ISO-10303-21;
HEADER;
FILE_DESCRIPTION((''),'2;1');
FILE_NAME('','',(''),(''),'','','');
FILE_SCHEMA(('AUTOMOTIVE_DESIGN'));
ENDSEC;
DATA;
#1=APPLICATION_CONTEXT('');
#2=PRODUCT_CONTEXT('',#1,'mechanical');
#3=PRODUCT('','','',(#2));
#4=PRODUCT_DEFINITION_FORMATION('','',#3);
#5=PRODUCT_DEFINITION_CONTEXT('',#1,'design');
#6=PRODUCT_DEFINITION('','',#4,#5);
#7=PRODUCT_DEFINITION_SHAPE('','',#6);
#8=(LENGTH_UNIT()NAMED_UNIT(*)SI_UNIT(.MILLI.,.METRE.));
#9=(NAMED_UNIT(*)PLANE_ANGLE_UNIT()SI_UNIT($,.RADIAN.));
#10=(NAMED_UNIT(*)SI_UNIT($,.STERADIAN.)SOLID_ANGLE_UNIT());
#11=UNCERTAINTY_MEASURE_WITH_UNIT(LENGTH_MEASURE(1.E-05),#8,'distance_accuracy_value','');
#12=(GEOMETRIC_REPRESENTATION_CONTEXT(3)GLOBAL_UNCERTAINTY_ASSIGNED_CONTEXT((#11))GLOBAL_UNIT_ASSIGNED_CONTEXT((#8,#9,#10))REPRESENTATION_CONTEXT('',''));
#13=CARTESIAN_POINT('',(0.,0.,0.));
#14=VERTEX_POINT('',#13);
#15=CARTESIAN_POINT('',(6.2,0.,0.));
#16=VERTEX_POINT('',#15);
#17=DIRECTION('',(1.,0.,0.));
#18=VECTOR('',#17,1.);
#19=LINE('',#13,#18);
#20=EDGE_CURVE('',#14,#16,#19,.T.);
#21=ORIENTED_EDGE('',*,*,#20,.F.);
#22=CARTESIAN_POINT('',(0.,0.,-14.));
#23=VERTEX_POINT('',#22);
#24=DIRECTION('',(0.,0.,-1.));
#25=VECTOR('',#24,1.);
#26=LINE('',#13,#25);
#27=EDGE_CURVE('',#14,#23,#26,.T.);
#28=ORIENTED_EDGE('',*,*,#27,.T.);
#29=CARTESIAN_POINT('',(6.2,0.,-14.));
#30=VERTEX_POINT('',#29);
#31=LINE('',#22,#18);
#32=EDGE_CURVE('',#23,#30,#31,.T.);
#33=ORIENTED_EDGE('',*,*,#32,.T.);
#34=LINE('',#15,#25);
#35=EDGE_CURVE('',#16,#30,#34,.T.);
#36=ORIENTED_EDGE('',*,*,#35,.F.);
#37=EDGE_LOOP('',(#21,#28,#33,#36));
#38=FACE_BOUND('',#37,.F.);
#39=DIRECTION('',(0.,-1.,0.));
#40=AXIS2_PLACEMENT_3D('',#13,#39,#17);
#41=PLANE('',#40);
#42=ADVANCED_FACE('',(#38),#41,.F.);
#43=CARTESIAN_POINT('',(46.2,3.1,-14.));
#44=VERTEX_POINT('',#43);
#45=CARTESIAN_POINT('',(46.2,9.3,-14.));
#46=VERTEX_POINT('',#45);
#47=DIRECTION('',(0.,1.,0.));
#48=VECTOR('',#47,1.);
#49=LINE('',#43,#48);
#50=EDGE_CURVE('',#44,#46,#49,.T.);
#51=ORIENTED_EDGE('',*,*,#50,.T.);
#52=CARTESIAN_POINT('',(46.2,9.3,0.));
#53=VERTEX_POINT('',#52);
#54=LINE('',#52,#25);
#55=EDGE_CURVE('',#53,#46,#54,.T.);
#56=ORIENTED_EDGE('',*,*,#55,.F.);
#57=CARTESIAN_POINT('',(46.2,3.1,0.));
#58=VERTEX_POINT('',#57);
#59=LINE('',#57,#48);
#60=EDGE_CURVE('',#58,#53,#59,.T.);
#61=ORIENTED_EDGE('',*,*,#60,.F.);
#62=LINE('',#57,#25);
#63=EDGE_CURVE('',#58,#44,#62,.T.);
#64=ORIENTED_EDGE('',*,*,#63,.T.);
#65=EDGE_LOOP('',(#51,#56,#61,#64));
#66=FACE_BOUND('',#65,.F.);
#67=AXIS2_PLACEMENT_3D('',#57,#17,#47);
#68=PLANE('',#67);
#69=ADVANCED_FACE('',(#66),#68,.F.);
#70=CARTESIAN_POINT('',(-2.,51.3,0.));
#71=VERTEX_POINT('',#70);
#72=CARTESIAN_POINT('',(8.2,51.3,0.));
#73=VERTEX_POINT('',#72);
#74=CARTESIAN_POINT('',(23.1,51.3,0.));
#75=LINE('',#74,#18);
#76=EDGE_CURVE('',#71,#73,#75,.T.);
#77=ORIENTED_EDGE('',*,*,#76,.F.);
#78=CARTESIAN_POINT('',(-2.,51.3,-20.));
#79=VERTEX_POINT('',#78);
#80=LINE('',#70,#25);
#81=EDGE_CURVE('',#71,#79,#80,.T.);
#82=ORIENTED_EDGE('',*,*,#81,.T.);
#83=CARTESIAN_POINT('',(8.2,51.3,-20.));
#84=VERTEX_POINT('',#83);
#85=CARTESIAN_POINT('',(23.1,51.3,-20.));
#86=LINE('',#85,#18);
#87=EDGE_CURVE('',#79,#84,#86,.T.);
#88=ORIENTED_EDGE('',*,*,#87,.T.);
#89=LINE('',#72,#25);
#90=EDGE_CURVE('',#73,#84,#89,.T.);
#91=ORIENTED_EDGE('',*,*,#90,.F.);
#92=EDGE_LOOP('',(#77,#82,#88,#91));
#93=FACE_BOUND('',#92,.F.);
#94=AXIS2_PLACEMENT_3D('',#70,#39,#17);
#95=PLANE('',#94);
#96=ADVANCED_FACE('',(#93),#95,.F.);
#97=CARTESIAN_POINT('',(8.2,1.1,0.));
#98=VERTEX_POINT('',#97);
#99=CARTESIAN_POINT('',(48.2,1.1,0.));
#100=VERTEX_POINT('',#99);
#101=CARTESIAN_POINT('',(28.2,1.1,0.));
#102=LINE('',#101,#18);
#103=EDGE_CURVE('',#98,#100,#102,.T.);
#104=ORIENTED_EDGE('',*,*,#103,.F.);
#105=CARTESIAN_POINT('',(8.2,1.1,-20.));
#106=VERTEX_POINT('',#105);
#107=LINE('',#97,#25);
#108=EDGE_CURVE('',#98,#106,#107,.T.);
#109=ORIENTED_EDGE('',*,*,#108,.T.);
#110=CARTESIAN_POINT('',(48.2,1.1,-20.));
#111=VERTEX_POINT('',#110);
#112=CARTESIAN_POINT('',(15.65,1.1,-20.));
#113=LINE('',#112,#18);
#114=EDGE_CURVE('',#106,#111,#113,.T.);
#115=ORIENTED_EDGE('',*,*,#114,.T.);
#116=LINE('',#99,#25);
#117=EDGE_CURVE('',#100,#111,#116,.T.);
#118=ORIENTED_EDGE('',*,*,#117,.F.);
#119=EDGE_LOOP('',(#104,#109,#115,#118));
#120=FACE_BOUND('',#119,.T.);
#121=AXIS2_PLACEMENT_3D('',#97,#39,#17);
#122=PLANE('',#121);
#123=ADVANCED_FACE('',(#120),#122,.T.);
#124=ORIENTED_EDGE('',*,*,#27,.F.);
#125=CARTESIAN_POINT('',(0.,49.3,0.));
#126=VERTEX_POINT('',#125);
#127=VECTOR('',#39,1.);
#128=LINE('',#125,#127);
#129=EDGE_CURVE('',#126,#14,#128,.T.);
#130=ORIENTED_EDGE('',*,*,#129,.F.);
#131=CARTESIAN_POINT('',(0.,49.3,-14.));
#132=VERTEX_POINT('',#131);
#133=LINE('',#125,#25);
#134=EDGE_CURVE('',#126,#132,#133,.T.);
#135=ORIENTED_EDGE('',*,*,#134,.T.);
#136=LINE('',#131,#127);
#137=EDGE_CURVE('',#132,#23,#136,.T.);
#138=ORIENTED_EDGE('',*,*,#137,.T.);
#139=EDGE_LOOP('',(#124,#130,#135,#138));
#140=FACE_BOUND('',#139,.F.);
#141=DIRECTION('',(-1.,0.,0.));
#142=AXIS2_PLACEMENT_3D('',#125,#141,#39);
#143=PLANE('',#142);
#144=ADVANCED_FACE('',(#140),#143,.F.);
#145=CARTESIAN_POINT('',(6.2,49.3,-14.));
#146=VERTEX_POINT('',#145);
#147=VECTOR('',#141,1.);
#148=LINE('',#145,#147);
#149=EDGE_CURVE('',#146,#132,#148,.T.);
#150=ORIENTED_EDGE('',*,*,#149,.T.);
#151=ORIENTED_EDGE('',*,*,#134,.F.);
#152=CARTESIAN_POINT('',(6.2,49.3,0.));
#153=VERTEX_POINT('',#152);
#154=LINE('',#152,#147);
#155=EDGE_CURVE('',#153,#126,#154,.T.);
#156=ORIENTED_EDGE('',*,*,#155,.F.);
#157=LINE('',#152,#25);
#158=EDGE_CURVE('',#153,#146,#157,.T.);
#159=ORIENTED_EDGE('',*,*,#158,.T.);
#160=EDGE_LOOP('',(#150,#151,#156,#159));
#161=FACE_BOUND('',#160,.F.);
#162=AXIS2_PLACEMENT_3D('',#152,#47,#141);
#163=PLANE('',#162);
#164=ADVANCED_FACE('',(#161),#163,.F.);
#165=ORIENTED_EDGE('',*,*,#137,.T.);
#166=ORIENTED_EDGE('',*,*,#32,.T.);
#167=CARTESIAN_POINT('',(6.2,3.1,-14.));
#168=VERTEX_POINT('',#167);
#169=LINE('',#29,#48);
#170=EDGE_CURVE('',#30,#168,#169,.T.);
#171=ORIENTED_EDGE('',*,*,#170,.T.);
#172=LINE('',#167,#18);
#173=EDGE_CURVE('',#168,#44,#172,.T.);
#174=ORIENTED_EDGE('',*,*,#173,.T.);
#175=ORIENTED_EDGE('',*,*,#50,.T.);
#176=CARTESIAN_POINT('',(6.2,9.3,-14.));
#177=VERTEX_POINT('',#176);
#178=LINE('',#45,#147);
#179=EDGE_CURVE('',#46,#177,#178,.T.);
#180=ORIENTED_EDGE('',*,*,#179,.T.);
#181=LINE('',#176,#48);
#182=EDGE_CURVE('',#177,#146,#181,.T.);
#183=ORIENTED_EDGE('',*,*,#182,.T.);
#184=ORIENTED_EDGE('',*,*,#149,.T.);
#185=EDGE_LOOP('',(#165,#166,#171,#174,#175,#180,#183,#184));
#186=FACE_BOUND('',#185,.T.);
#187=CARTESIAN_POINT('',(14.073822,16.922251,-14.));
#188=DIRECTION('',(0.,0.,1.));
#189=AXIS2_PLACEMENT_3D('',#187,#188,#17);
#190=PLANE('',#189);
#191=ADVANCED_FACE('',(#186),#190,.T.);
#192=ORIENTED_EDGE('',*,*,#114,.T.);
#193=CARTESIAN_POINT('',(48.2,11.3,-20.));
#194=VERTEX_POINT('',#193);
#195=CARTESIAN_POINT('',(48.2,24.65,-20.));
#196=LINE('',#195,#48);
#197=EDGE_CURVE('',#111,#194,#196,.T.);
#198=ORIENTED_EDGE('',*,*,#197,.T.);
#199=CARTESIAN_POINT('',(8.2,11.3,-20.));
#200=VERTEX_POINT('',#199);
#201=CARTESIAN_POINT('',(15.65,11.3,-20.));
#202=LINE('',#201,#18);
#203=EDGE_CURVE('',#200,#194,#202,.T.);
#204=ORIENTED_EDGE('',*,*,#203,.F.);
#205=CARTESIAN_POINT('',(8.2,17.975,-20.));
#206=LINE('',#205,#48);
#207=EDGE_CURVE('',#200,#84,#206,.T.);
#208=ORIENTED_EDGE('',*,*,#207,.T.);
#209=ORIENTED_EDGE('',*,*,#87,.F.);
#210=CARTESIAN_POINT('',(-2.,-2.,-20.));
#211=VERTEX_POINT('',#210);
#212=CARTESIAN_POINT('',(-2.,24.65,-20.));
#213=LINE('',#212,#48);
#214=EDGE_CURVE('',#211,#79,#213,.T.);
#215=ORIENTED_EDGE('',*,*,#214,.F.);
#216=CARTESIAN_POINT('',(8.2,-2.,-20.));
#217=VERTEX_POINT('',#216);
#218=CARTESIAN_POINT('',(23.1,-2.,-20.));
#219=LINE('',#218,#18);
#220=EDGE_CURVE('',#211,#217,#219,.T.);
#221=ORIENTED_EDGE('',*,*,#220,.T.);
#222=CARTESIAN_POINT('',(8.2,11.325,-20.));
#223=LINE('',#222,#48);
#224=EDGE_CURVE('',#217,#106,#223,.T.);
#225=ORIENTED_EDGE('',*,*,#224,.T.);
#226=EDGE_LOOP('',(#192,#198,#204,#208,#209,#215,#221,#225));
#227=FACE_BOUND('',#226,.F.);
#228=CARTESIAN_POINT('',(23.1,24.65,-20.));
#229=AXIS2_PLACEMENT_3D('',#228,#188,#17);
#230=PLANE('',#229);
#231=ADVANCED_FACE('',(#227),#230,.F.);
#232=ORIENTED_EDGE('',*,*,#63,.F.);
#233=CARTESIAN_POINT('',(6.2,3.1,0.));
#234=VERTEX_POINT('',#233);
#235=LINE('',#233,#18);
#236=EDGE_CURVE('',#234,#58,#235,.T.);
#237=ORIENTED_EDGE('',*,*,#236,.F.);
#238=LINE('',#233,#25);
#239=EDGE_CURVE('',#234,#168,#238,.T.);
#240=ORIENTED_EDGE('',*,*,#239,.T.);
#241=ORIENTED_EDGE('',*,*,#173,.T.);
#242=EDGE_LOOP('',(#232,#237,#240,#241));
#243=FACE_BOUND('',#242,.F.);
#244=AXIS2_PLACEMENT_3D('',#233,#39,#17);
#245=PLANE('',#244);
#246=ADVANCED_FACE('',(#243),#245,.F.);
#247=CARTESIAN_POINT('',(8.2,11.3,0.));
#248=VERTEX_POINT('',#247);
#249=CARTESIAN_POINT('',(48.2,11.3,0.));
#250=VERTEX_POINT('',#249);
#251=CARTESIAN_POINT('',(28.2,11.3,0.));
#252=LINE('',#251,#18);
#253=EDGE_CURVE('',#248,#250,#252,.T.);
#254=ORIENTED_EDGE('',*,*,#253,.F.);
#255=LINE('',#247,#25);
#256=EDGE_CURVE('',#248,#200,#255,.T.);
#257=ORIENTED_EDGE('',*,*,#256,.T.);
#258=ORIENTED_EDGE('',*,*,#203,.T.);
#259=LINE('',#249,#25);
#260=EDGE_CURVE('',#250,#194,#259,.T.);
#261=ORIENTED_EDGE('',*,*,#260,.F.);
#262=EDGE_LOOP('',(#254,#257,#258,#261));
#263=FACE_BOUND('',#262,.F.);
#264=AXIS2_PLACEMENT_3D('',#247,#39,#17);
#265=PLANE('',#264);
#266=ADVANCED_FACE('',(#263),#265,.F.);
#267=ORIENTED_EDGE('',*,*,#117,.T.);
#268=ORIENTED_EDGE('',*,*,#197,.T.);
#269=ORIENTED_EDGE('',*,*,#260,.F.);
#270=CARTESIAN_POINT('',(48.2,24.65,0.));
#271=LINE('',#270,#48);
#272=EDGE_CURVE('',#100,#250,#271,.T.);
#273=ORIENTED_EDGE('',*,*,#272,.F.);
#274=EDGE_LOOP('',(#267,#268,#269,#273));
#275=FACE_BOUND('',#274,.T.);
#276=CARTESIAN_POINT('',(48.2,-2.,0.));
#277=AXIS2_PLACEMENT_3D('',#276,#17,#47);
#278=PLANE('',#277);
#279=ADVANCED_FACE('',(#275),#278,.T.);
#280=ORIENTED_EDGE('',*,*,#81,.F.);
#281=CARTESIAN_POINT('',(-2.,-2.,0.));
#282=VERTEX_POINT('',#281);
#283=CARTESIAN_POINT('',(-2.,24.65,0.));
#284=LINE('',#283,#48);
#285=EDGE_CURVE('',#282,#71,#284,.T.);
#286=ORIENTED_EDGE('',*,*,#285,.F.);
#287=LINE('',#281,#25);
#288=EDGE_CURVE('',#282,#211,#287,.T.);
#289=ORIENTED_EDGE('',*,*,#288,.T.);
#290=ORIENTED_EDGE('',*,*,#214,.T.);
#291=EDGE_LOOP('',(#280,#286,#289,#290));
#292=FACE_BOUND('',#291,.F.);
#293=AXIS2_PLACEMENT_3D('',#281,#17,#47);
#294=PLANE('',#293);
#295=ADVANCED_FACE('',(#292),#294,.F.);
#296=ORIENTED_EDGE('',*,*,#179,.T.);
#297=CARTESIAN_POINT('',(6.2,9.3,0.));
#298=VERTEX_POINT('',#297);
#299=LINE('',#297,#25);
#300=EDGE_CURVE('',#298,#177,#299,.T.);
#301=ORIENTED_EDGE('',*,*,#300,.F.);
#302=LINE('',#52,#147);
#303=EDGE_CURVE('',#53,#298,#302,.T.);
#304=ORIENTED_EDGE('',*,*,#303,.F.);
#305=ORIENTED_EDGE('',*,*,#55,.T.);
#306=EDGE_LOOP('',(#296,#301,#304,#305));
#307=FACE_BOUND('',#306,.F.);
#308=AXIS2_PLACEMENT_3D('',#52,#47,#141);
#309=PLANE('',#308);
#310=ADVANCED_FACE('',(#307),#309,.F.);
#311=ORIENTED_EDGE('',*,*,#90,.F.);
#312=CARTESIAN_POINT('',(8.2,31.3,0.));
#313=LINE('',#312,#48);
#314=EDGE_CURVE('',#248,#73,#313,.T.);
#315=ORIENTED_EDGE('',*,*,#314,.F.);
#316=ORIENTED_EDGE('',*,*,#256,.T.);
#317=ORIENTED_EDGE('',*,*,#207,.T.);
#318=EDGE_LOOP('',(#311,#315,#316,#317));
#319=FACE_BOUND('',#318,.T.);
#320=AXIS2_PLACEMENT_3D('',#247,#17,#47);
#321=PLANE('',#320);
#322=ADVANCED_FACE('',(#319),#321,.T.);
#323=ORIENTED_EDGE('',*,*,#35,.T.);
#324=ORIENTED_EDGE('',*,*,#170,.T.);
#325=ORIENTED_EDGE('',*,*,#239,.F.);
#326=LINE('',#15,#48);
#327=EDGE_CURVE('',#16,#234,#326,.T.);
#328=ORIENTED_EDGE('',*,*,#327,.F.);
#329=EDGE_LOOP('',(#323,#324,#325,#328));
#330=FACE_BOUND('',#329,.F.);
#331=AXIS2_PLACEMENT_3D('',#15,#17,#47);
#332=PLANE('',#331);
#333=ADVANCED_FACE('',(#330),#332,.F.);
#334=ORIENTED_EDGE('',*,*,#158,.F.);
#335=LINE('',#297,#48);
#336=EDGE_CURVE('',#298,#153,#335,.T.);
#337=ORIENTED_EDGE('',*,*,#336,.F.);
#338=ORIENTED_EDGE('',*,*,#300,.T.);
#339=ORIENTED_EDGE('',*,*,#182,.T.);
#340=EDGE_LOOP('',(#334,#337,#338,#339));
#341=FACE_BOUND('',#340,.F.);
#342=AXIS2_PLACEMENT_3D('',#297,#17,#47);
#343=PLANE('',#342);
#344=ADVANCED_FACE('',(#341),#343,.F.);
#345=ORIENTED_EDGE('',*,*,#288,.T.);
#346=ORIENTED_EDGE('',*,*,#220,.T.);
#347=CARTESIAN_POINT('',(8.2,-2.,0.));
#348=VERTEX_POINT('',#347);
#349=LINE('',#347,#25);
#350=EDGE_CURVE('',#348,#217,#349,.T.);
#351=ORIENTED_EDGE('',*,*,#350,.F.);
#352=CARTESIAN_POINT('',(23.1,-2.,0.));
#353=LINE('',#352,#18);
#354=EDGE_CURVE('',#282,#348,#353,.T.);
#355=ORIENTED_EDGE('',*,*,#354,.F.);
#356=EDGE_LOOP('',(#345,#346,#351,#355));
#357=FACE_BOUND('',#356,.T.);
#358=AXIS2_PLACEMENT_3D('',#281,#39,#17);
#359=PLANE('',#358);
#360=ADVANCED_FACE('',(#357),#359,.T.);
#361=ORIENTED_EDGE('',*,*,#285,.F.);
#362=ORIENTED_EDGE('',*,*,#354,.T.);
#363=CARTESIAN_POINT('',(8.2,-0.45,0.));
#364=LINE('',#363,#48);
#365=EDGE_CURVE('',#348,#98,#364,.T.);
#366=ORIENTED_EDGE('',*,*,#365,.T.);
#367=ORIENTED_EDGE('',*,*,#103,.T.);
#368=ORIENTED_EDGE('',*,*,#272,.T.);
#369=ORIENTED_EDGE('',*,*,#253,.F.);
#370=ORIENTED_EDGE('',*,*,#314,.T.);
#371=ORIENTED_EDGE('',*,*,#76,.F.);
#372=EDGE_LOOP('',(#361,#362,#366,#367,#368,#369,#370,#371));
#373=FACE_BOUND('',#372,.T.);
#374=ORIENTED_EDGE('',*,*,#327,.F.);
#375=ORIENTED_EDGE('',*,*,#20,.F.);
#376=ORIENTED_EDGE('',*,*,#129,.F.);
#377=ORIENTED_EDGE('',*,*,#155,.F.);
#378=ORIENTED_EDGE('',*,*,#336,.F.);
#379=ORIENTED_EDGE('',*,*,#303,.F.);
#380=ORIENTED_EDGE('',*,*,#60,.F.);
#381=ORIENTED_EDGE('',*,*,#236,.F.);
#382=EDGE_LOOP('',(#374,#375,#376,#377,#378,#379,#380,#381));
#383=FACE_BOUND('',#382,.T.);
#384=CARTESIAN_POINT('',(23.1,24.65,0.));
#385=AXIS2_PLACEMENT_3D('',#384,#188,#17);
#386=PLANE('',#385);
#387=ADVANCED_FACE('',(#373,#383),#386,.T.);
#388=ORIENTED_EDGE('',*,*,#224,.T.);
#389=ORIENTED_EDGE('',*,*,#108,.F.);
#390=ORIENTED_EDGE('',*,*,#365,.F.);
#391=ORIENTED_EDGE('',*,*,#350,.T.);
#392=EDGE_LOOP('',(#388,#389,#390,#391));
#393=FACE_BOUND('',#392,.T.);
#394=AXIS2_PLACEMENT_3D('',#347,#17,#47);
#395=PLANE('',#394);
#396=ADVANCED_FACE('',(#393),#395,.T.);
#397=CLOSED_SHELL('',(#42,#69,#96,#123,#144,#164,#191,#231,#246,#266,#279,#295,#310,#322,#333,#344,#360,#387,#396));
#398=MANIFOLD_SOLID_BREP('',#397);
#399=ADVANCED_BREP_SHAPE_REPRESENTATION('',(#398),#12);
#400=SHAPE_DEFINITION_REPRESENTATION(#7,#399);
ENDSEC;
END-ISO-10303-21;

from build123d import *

# Parameters (mm, degrees)
F1_W     = 50.2
F1_H     = 53.3
F2_DEPTH = 20
F3_DEPTH = 14
F4_W     = 40
F4_H     = 40
F4_H_2   = 3.1
F5_DEPTH = 20.001


# Not quite as in the source:
# - a feature of the source that left no trace in its solid (it failed there, or was rolled back) is left out


with BuildPart() as f2:
    # F1 (on Top) → F2 (new body)
    with BuildSketch(Plane.XY):
        with Locations((23.1, 24.65)):
            Rectangle(F1_W, F1_H)
    extrude(amount=-F2_DEPTH)

    # F0 (on Top) → F3 (cut)
    with BuildSketch(Plane.XY):
        Polygon((6.2, 49.3), (0, 49.3), (0, 0), (6.2, 0), (6.2, 3.1), (46.2, 3.1), (46.2, 9.3), (6.2, 9.3), align=None)
    extrude(amount=-F3_DEPTH, mode=Mode.SUBTRACT)

    # F4 (on face) → F5 (cut, through all)
    with BuildSketch(Plane.XY):
        with Locations((28.2, 31.3)):
            Rectangle(F4_W, F4_H)
        with Locations((28.2, -0.45)):
            Rectangle(F4_W, F4_H_2)
    extrude(amount=-F5_DEPTH, mode=Mode.SUBTRACT)


solid = f2.part
